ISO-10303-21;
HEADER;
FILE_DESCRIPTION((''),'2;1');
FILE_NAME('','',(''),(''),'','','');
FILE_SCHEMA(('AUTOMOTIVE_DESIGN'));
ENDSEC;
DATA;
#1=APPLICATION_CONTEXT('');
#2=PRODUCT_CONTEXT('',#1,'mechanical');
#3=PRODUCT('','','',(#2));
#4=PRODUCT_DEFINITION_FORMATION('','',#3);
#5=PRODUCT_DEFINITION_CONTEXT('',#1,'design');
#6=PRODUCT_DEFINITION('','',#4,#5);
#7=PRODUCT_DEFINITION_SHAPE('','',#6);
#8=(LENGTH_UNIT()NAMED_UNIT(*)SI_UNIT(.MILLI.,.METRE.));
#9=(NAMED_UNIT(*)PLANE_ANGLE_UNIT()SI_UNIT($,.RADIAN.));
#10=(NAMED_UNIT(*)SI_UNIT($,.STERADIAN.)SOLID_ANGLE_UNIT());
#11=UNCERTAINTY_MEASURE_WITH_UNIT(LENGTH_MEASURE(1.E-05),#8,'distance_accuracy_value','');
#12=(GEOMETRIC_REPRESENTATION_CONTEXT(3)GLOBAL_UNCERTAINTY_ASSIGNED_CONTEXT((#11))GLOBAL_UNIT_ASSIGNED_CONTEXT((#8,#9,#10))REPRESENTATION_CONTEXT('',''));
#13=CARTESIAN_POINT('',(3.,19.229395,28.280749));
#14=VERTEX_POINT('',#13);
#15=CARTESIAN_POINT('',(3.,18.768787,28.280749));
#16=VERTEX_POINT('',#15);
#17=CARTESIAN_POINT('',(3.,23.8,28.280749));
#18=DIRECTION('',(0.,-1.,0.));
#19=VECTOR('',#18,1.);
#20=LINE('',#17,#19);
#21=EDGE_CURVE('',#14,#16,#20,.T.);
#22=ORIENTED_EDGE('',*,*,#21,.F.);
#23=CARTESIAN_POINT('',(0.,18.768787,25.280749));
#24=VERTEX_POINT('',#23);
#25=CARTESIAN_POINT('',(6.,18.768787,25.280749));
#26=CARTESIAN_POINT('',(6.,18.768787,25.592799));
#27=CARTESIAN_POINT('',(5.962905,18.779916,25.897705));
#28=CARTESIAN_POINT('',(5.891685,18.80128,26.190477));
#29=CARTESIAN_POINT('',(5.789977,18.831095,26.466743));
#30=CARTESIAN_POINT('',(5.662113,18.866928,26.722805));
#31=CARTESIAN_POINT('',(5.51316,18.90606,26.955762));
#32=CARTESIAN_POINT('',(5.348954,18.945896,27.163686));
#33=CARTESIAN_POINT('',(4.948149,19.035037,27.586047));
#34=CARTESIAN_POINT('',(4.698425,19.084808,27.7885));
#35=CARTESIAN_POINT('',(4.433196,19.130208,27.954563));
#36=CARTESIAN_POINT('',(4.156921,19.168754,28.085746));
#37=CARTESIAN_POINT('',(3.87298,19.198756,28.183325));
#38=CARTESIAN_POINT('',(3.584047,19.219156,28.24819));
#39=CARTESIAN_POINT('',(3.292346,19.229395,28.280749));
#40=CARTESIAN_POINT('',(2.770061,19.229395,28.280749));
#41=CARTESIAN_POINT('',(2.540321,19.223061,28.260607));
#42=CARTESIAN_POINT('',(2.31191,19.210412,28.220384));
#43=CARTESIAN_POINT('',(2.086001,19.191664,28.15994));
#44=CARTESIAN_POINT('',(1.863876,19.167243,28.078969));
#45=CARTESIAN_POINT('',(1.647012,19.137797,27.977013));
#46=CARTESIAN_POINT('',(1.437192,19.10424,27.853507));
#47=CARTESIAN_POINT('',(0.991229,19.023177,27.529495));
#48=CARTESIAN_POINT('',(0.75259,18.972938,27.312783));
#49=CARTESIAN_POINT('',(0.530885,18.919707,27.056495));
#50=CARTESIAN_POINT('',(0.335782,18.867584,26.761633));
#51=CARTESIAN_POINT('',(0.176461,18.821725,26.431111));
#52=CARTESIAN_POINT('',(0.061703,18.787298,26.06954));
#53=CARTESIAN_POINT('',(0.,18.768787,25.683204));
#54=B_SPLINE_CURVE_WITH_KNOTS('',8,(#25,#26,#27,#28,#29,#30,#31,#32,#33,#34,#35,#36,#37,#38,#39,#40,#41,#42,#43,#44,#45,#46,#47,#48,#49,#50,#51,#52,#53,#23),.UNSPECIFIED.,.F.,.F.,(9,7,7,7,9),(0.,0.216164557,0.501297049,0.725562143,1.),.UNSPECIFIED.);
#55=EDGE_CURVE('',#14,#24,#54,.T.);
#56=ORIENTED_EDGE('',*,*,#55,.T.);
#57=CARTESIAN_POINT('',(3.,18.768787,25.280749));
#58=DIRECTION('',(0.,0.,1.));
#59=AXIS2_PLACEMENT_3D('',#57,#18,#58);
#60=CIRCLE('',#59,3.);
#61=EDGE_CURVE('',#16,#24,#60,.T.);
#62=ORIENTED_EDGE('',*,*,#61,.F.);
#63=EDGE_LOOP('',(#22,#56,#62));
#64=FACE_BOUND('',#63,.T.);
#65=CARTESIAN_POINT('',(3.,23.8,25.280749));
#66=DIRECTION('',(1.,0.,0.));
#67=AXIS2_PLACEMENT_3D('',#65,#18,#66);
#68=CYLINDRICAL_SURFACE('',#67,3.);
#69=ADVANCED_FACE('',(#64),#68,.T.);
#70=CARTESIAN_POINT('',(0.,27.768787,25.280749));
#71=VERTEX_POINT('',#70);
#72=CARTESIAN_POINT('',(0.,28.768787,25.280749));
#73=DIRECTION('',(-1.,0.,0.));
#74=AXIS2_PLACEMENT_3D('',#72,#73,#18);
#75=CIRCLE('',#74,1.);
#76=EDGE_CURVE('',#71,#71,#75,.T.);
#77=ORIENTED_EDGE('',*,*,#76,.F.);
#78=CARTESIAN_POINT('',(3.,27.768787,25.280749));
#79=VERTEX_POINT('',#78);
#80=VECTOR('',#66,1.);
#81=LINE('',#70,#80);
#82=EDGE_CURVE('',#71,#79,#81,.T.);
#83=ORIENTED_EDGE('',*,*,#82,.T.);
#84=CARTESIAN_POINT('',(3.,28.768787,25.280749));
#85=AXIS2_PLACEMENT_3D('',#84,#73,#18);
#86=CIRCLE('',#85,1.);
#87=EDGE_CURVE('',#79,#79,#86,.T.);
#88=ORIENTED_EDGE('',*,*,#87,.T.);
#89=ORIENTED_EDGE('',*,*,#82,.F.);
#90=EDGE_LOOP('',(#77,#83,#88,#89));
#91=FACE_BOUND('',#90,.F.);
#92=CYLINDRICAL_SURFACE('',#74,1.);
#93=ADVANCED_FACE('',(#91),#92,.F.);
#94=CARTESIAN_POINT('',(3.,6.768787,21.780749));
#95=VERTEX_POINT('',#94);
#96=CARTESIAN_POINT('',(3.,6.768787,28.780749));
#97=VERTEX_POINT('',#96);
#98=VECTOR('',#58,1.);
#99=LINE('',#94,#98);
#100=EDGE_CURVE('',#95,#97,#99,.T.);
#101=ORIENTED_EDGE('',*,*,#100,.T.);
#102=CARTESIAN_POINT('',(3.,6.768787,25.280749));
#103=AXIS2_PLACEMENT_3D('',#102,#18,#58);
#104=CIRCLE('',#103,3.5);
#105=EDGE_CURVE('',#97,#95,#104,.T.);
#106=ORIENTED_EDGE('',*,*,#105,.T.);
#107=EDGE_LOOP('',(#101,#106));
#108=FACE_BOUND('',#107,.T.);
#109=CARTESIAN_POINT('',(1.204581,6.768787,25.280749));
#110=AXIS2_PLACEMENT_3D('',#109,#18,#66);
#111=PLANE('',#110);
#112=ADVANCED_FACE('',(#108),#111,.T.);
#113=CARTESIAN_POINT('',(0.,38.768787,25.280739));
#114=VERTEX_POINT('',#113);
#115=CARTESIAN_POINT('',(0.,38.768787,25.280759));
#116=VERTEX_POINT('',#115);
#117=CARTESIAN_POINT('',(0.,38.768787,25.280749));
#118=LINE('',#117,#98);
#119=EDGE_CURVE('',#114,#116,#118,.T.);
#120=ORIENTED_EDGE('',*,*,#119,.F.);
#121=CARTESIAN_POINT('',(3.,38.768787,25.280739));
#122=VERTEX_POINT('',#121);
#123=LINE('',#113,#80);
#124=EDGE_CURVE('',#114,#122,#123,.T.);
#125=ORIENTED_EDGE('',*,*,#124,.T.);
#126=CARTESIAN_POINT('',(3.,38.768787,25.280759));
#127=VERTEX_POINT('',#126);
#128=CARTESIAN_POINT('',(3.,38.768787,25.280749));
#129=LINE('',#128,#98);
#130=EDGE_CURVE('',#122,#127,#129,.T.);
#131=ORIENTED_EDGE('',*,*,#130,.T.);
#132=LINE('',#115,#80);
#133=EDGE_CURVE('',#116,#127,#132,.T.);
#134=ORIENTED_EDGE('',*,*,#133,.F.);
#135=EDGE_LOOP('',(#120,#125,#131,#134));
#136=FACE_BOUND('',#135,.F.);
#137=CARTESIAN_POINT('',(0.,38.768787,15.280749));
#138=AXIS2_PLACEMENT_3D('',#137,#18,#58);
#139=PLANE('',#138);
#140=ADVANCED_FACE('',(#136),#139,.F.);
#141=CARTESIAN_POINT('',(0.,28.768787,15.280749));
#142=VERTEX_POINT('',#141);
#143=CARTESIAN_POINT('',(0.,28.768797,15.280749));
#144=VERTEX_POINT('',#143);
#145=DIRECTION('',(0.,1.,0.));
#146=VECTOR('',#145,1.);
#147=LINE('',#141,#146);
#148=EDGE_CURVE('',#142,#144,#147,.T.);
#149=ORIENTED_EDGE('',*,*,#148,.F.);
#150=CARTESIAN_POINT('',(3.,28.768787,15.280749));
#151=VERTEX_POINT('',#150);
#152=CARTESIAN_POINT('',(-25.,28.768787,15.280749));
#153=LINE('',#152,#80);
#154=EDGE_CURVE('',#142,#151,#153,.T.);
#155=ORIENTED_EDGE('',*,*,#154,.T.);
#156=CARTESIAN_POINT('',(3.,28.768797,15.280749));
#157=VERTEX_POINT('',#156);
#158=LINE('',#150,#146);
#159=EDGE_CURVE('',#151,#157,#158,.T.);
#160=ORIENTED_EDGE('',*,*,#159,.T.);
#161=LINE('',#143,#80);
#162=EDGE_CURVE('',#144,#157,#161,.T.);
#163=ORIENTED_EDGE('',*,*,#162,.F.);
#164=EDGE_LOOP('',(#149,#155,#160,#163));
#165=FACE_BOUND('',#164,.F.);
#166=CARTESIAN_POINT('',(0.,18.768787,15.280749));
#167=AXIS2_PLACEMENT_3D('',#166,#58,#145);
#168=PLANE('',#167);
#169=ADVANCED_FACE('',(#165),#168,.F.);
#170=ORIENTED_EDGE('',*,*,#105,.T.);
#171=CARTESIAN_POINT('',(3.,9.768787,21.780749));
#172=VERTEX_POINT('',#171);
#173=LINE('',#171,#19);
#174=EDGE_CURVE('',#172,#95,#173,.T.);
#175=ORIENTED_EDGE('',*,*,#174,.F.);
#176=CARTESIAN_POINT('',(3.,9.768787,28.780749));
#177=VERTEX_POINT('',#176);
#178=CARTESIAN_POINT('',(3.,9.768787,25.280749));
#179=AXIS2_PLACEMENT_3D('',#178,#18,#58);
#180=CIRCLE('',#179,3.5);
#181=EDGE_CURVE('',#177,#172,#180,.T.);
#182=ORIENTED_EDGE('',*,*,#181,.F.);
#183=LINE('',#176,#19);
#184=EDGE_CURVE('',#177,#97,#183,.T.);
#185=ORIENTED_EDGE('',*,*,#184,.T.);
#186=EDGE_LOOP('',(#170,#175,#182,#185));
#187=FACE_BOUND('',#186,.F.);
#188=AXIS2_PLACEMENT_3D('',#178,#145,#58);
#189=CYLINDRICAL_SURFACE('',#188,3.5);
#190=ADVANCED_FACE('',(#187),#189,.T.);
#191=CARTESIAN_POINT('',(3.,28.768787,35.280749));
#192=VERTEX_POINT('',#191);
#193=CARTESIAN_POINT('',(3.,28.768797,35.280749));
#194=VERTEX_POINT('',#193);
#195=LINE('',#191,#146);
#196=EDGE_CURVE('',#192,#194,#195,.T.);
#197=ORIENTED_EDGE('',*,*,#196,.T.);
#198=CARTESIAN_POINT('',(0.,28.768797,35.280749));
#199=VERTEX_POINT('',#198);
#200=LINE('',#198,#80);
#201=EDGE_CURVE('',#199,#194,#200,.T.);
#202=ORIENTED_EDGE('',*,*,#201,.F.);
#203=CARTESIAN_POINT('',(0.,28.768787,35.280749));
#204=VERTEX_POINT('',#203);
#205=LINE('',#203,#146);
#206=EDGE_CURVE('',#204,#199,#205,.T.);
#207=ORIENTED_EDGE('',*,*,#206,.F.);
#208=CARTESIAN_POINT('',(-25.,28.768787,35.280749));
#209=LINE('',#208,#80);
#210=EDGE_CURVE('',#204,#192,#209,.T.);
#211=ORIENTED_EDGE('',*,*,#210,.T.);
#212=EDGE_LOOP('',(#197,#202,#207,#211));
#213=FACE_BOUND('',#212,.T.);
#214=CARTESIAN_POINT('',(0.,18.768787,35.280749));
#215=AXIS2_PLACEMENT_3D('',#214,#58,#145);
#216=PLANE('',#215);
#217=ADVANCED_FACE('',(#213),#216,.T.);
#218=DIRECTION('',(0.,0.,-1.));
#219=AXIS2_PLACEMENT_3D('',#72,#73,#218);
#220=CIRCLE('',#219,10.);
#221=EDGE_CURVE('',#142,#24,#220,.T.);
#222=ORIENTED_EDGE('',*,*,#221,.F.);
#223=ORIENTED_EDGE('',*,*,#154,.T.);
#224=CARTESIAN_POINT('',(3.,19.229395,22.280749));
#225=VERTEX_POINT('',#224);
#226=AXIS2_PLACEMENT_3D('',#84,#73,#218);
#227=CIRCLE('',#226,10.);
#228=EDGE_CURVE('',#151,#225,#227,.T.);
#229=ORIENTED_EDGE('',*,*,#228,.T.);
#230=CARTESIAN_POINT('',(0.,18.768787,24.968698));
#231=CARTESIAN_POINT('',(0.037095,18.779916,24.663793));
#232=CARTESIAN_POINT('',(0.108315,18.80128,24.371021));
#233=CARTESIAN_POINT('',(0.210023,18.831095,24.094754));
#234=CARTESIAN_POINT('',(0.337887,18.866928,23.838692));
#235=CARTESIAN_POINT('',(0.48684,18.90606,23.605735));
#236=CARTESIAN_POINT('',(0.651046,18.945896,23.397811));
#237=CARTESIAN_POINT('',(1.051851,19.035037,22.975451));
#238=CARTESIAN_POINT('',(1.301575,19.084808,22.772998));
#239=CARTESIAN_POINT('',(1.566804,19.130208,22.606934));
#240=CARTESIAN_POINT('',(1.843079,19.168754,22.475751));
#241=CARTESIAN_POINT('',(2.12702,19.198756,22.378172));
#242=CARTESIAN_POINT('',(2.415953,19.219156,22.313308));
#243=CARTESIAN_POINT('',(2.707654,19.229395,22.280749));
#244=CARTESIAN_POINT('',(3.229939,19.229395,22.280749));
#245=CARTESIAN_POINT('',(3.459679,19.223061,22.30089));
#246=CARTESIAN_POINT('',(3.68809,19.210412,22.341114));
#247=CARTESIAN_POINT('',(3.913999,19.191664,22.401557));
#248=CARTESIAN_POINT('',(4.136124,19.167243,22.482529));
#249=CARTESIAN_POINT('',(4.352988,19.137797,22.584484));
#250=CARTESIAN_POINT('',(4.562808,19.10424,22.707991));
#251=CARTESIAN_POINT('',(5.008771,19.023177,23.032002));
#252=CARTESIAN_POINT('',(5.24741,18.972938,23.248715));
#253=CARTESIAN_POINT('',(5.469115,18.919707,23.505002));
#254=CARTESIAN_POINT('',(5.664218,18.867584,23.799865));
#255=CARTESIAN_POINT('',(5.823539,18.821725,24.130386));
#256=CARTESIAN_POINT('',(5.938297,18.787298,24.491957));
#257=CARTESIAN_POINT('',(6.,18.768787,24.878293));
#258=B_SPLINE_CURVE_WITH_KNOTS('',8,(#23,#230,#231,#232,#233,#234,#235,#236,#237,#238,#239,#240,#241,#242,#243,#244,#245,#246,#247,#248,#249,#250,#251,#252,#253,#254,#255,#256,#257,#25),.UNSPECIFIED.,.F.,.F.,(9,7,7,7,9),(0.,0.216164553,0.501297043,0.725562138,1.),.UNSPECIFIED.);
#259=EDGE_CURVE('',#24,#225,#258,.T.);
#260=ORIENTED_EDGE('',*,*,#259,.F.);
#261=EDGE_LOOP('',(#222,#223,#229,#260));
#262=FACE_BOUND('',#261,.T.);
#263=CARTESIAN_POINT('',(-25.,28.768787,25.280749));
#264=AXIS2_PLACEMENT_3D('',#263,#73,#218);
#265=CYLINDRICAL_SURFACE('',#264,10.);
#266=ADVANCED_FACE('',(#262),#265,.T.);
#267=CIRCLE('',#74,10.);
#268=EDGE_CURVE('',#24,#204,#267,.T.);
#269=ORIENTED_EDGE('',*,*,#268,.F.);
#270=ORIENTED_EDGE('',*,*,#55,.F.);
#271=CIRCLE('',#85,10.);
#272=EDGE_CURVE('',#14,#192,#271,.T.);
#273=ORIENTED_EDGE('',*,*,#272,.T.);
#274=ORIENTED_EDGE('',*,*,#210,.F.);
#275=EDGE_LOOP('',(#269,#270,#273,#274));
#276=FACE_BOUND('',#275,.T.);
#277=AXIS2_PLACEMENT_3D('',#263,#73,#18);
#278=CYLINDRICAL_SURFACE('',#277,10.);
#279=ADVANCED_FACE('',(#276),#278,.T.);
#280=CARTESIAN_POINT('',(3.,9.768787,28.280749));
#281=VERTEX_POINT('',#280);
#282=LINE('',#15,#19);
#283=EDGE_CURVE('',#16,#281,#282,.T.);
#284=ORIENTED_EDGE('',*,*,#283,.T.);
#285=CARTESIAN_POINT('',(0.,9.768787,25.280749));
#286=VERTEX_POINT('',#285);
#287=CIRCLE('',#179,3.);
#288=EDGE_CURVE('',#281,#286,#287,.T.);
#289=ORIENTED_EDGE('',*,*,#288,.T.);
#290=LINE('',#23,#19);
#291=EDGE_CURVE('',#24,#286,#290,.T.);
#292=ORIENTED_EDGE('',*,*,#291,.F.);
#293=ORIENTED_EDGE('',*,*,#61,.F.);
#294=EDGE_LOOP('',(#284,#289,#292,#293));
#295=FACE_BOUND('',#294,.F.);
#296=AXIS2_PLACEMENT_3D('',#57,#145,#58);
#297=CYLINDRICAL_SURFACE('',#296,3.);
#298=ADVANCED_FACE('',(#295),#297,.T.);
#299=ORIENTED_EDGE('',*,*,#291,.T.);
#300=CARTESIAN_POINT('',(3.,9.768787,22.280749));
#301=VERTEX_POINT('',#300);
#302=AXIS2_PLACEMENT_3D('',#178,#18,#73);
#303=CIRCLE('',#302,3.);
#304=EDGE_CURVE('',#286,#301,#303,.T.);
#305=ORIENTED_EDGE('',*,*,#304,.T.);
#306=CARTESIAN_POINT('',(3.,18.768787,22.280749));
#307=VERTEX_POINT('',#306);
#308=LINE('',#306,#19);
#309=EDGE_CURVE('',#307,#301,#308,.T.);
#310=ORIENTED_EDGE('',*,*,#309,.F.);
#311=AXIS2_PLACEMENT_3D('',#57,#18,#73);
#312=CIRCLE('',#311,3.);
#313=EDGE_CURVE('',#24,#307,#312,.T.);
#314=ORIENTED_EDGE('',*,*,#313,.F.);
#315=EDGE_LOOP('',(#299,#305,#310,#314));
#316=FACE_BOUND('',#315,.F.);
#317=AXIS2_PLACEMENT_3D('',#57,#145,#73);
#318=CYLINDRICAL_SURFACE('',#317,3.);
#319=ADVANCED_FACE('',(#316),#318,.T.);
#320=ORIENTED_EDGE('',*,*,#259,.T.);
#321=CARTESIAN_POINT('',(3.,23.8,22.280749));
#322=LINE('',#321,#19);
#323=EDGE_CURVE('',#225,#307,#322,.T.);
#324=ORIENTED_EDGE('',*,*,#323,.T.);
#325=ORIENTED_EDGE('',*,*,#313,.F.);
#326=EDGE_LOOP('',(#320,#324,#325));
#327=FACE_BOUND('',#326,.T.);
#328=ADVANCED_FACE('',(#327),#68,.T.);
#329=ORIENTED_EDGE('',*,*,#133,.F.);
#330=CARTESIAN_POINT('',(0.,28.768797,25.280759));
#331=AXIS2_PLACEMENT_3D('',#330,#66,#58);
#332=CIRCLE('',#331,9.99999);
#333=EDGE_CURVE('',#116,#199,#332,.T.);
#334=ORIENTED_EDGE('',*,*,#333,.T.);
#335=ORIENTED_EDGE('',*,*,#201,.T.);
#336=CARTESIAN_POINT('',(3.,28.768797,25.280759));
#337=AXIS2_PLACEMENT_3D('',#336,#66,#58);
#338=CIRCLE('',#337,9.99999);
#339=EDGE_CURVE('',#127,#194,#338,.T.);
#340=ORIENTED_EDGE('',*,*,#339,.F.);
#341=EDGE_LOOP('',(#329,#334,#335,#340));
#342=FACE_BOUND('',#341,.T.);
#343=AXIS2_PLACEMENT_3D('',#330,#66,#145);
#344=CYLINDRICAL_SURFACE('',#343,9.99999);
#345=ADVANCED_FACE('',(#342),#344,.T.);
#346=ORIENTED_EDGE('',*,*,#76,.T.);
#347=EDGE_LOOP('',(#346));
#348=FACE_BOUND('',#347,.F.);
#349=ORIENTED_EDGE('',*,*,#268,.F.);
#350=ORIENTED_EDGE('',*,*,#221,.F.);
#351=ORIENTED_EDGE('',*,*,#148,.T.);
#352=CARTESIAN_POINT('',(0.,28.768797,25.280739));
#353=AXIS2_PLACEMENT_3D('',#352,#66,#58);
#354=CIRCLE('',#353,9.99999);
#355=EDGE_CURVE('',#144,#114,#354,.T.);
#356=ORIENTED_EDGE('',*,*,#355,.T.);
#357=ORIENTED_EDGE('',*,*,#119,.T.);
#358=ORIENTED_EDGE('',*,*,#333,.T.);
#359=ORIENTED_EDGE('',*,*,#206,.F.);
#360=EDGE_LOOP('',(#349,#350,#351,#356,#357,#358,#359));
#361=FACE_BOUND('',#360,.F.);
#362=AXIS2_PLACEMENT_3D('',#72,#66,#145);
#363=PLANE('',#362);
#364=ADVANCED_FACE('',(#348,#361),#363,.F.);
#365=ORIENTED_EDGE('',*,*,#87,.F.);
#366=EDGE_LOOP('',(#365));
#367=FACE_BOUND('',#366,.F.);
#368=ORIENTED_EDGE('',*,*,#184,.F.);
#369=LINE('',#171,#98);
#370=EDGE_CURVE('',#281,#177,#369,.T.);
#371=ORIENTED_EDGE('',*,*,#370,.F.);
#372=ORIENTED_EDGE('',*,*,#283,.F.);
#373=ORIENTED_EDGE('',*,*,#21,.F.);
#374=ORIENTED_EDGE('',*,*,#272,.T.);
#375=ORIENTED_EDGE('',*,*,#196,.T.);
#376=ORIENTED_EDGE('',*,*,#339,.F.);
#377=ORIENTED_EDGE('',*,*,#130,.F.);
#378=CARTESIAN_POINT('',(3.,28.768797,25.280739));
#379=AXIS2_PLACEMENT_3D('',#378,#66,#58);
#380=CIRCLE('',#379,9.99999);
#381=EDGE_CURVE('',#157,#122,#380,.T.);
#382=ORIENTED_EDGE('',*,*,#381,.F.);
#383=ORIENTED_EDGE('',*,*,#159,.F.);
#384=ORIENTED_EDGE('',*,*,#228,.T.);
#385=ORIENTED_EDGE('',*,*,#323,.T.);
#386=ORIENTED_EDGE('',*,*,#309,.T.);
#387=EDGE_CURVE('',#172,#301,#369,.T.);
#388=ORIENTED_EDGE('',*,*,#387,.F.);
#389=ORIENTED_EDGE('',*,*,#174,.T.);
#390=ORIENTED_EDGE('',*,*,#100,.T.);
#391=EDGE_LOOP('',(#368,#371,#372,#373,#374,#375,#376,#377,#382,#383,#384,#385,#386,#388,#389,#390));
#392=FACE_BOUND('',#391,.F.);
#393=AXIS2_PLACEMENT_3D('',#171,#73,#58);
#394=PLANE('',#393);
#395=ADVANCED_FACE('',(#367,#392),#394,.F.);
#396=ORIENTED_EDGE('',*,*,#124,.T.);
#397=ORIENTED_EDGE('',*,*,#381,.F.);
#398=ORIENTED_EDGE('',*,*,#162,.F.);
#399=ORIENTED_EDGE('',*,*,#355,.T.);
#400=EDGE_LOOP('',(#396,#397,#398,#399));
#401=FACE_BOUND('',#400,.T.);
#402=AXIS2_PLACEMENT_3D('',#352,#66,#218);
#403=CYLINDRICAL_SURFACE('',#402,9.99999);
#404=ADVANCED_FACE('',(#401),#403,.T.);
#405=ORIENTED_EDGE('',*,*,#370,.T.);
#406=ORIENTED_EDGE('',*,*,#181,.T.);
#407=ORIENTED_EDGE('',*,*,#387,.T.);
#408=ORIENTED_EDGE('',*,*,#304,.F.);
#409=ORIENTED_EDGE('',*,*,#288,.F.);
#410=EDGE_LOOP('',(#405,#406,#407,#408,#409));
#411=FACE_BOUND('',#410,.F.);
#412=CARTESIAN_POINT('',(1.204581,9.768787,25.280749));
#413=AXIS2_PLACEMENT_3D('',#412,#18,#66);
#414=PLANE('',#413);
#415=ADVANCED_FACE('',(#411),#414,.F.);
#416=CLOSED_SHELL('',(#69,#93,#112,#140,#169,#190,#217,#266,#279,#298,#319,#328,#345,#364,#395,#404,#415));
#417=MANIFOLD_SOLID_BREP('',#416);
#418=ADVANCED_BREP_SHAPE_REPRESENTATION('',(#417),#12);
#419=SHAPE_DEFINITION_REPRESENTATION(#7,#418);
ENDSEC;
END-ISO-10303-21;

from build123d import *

# Parameters (mm, degrees)
F0_W         = 20
F0_H         = 20
F1_DEPTH     = 3
F3_DEPTH     = 9
F4_R         = 9.99999
F5_T3_DEPTH  = 53
F5_S4_R      = 3
F5_T5_DEPTH  = 29
F5_T8_DEPTH  = 53
F5_S9_R      = 3
F5_T10_DEPTH = 29
F6_R         = 1
F7_DEPTH     = 25
F9_DEPTH     = 3


# Not quite as in the source:
# - a fillet or chamfer that OpenCascade refuses, or shapes differently, is made with other operations: its cross-section is extruded or revolved along the edge and cut away or added
# - a fillet or chamfer is up to 0.001 mm smaller than in the source, because OpenCascade refuses the exact size


with BuildPart() as f1:
    # F0 (on Right) → F1 (new body)
    with BuildSketch(Plane.YZ):
        with Locations((28.7687871605, 25.2807487535)):
            Rectangle(F0_W, F0_H)
    extrude(amount=F1_DEPTH)

    # F2 (on face) → F3 (join)
    with BuildSketch(Plane.XZ.offset(-18.7687871605)):
        with BuildLine():
            Line((3, 22.2807487535), (3, 28.2807487535))
            ThreePointArc((3, 28.2807487535), (0.8786796564, 27.4020690971), (0, 25.2807487535))
            ThreePointArc((0, 25.2807487535), (0.8786796564, 23.15942841), (3, 22.2807487535))
        make_face()
    extrude(amount=F3_DEPTH)

    # F4 (radius 10 in the source; OpenCascade refuses exactly that, so slightly less here)
    f4_edges = [f1.edges().sort_by_distance(p)[0] for p in [
        (1.5, 38.768787, 35.280749),
        (1.5, 38.768787, 15.280749),
    ]]
    fillet(f4_edges, radius=F4_R)

    # F5: fillet of radius 10 on 2 edges, made by hand


with BuildPart() as f5_tool1:
    # F5_s2 → F5_t3 (new body)
    with BuildSketch(Plane.YZ.offset(-25)):
        with BuildLine():
            ThreePointArc((18.7687871605, 25.2807487535), (21.6977193487, 32.3518165654), (28.7687871605, 35.2807487535))
            Line((28.7687871605, 35.2807487535), (18.7687871605, 35.2807487535))
            Line((18.7687871605, 35.2807487535), (18.7687871605, 25.2807487535))
        make_face()
    extrude(amount=F5_T3_DEPTH)

    # F5_s4 → F5_t5 (cut, symmetric)
    with BuildSketch(Plane.XZ.offset(-23.8)):
        with Locations((3, 25.2807487535)):
            Circle(F5_S4_R)
    extrude(amount=F5_T5_DEPTH, both=True, mode=Mode.SUBTRACT)


with BuildPart() as f5_tool6:
    # F5_s7 → F5_t8 (new body)
    with BuildSketch(Plane.YZ.offset(-25)):
        with BuildLine():
            ThreePointArc((28.7687871605, 15.2807487535), (21.6977193487, 18.2096809417), (18.7687871605, 25.2807487535))
            Line((18.7687871605, 25.2807487535), (18.7687871605, 15.2807487535))
            Line((18.7687871605, 15.2807487535), (28.7687871605, 15.2807487535))
        make_face()
    extrude(amount=F5_T8_DEPTH)

    # F5_s9 → F5_t10 (cut, symmetric)
    with BuildSketch(Plane.XZ.offset(-23.8)):
        with Locations((3, 25.2807487535)):
            Circle(F5_S9_R)
    extrude(amount=F5_T10_DEPTH, both=True, mode=Mode.SUBTRACT)


with BuildPart() as f1_1:
    add(f1.part)

    # F5_t11: cut F5_tool1, F5_tool6
    add([f5_tool1.part, f5_tool6.part], mode=Mode.SUBTRACT)

    # F6 (on face) → F7 (cut)
    with BuildSketch(Plane(origin=(0, 0, 0), x_dir=(0, -1, 0), z_dir=(-1, 0, 0))):
        with Locations((-28.7687871605, 25.2807487535)):
            Circle(F6_R)
    extrude(amount=-F7_DEPTH, mode=Mode.SUBTRACT)

    # F8 (on face) → F9 (join)
    with BuildSketch(Plane.XZ.offset(-9.7687871605)):
        with BuildLine():
            Line((3, 28.2807487535), (3, 28.7807487535))
            ThreePointArc((3, 28.7807487535), (-0.5, 25.2807487535), (3, 21.7807487535))
            Line((3, 21.7807487535), (3, 22.2807487535))
            ThreePointArc((3, 22.2807487535), (0, 25.2807487535), (3, 28.2807487535))
        make_face()
        with BuildLine():
            Line((3, 22.2807487535), (3, 28.2807487535))
            ThreePointArc((3, 28.2807487535), (0, 25.2807487535), (3, 22.2807487535))
        make_face()
    extrude(amount=F9_DEPTH)


solid = f1_1.part
